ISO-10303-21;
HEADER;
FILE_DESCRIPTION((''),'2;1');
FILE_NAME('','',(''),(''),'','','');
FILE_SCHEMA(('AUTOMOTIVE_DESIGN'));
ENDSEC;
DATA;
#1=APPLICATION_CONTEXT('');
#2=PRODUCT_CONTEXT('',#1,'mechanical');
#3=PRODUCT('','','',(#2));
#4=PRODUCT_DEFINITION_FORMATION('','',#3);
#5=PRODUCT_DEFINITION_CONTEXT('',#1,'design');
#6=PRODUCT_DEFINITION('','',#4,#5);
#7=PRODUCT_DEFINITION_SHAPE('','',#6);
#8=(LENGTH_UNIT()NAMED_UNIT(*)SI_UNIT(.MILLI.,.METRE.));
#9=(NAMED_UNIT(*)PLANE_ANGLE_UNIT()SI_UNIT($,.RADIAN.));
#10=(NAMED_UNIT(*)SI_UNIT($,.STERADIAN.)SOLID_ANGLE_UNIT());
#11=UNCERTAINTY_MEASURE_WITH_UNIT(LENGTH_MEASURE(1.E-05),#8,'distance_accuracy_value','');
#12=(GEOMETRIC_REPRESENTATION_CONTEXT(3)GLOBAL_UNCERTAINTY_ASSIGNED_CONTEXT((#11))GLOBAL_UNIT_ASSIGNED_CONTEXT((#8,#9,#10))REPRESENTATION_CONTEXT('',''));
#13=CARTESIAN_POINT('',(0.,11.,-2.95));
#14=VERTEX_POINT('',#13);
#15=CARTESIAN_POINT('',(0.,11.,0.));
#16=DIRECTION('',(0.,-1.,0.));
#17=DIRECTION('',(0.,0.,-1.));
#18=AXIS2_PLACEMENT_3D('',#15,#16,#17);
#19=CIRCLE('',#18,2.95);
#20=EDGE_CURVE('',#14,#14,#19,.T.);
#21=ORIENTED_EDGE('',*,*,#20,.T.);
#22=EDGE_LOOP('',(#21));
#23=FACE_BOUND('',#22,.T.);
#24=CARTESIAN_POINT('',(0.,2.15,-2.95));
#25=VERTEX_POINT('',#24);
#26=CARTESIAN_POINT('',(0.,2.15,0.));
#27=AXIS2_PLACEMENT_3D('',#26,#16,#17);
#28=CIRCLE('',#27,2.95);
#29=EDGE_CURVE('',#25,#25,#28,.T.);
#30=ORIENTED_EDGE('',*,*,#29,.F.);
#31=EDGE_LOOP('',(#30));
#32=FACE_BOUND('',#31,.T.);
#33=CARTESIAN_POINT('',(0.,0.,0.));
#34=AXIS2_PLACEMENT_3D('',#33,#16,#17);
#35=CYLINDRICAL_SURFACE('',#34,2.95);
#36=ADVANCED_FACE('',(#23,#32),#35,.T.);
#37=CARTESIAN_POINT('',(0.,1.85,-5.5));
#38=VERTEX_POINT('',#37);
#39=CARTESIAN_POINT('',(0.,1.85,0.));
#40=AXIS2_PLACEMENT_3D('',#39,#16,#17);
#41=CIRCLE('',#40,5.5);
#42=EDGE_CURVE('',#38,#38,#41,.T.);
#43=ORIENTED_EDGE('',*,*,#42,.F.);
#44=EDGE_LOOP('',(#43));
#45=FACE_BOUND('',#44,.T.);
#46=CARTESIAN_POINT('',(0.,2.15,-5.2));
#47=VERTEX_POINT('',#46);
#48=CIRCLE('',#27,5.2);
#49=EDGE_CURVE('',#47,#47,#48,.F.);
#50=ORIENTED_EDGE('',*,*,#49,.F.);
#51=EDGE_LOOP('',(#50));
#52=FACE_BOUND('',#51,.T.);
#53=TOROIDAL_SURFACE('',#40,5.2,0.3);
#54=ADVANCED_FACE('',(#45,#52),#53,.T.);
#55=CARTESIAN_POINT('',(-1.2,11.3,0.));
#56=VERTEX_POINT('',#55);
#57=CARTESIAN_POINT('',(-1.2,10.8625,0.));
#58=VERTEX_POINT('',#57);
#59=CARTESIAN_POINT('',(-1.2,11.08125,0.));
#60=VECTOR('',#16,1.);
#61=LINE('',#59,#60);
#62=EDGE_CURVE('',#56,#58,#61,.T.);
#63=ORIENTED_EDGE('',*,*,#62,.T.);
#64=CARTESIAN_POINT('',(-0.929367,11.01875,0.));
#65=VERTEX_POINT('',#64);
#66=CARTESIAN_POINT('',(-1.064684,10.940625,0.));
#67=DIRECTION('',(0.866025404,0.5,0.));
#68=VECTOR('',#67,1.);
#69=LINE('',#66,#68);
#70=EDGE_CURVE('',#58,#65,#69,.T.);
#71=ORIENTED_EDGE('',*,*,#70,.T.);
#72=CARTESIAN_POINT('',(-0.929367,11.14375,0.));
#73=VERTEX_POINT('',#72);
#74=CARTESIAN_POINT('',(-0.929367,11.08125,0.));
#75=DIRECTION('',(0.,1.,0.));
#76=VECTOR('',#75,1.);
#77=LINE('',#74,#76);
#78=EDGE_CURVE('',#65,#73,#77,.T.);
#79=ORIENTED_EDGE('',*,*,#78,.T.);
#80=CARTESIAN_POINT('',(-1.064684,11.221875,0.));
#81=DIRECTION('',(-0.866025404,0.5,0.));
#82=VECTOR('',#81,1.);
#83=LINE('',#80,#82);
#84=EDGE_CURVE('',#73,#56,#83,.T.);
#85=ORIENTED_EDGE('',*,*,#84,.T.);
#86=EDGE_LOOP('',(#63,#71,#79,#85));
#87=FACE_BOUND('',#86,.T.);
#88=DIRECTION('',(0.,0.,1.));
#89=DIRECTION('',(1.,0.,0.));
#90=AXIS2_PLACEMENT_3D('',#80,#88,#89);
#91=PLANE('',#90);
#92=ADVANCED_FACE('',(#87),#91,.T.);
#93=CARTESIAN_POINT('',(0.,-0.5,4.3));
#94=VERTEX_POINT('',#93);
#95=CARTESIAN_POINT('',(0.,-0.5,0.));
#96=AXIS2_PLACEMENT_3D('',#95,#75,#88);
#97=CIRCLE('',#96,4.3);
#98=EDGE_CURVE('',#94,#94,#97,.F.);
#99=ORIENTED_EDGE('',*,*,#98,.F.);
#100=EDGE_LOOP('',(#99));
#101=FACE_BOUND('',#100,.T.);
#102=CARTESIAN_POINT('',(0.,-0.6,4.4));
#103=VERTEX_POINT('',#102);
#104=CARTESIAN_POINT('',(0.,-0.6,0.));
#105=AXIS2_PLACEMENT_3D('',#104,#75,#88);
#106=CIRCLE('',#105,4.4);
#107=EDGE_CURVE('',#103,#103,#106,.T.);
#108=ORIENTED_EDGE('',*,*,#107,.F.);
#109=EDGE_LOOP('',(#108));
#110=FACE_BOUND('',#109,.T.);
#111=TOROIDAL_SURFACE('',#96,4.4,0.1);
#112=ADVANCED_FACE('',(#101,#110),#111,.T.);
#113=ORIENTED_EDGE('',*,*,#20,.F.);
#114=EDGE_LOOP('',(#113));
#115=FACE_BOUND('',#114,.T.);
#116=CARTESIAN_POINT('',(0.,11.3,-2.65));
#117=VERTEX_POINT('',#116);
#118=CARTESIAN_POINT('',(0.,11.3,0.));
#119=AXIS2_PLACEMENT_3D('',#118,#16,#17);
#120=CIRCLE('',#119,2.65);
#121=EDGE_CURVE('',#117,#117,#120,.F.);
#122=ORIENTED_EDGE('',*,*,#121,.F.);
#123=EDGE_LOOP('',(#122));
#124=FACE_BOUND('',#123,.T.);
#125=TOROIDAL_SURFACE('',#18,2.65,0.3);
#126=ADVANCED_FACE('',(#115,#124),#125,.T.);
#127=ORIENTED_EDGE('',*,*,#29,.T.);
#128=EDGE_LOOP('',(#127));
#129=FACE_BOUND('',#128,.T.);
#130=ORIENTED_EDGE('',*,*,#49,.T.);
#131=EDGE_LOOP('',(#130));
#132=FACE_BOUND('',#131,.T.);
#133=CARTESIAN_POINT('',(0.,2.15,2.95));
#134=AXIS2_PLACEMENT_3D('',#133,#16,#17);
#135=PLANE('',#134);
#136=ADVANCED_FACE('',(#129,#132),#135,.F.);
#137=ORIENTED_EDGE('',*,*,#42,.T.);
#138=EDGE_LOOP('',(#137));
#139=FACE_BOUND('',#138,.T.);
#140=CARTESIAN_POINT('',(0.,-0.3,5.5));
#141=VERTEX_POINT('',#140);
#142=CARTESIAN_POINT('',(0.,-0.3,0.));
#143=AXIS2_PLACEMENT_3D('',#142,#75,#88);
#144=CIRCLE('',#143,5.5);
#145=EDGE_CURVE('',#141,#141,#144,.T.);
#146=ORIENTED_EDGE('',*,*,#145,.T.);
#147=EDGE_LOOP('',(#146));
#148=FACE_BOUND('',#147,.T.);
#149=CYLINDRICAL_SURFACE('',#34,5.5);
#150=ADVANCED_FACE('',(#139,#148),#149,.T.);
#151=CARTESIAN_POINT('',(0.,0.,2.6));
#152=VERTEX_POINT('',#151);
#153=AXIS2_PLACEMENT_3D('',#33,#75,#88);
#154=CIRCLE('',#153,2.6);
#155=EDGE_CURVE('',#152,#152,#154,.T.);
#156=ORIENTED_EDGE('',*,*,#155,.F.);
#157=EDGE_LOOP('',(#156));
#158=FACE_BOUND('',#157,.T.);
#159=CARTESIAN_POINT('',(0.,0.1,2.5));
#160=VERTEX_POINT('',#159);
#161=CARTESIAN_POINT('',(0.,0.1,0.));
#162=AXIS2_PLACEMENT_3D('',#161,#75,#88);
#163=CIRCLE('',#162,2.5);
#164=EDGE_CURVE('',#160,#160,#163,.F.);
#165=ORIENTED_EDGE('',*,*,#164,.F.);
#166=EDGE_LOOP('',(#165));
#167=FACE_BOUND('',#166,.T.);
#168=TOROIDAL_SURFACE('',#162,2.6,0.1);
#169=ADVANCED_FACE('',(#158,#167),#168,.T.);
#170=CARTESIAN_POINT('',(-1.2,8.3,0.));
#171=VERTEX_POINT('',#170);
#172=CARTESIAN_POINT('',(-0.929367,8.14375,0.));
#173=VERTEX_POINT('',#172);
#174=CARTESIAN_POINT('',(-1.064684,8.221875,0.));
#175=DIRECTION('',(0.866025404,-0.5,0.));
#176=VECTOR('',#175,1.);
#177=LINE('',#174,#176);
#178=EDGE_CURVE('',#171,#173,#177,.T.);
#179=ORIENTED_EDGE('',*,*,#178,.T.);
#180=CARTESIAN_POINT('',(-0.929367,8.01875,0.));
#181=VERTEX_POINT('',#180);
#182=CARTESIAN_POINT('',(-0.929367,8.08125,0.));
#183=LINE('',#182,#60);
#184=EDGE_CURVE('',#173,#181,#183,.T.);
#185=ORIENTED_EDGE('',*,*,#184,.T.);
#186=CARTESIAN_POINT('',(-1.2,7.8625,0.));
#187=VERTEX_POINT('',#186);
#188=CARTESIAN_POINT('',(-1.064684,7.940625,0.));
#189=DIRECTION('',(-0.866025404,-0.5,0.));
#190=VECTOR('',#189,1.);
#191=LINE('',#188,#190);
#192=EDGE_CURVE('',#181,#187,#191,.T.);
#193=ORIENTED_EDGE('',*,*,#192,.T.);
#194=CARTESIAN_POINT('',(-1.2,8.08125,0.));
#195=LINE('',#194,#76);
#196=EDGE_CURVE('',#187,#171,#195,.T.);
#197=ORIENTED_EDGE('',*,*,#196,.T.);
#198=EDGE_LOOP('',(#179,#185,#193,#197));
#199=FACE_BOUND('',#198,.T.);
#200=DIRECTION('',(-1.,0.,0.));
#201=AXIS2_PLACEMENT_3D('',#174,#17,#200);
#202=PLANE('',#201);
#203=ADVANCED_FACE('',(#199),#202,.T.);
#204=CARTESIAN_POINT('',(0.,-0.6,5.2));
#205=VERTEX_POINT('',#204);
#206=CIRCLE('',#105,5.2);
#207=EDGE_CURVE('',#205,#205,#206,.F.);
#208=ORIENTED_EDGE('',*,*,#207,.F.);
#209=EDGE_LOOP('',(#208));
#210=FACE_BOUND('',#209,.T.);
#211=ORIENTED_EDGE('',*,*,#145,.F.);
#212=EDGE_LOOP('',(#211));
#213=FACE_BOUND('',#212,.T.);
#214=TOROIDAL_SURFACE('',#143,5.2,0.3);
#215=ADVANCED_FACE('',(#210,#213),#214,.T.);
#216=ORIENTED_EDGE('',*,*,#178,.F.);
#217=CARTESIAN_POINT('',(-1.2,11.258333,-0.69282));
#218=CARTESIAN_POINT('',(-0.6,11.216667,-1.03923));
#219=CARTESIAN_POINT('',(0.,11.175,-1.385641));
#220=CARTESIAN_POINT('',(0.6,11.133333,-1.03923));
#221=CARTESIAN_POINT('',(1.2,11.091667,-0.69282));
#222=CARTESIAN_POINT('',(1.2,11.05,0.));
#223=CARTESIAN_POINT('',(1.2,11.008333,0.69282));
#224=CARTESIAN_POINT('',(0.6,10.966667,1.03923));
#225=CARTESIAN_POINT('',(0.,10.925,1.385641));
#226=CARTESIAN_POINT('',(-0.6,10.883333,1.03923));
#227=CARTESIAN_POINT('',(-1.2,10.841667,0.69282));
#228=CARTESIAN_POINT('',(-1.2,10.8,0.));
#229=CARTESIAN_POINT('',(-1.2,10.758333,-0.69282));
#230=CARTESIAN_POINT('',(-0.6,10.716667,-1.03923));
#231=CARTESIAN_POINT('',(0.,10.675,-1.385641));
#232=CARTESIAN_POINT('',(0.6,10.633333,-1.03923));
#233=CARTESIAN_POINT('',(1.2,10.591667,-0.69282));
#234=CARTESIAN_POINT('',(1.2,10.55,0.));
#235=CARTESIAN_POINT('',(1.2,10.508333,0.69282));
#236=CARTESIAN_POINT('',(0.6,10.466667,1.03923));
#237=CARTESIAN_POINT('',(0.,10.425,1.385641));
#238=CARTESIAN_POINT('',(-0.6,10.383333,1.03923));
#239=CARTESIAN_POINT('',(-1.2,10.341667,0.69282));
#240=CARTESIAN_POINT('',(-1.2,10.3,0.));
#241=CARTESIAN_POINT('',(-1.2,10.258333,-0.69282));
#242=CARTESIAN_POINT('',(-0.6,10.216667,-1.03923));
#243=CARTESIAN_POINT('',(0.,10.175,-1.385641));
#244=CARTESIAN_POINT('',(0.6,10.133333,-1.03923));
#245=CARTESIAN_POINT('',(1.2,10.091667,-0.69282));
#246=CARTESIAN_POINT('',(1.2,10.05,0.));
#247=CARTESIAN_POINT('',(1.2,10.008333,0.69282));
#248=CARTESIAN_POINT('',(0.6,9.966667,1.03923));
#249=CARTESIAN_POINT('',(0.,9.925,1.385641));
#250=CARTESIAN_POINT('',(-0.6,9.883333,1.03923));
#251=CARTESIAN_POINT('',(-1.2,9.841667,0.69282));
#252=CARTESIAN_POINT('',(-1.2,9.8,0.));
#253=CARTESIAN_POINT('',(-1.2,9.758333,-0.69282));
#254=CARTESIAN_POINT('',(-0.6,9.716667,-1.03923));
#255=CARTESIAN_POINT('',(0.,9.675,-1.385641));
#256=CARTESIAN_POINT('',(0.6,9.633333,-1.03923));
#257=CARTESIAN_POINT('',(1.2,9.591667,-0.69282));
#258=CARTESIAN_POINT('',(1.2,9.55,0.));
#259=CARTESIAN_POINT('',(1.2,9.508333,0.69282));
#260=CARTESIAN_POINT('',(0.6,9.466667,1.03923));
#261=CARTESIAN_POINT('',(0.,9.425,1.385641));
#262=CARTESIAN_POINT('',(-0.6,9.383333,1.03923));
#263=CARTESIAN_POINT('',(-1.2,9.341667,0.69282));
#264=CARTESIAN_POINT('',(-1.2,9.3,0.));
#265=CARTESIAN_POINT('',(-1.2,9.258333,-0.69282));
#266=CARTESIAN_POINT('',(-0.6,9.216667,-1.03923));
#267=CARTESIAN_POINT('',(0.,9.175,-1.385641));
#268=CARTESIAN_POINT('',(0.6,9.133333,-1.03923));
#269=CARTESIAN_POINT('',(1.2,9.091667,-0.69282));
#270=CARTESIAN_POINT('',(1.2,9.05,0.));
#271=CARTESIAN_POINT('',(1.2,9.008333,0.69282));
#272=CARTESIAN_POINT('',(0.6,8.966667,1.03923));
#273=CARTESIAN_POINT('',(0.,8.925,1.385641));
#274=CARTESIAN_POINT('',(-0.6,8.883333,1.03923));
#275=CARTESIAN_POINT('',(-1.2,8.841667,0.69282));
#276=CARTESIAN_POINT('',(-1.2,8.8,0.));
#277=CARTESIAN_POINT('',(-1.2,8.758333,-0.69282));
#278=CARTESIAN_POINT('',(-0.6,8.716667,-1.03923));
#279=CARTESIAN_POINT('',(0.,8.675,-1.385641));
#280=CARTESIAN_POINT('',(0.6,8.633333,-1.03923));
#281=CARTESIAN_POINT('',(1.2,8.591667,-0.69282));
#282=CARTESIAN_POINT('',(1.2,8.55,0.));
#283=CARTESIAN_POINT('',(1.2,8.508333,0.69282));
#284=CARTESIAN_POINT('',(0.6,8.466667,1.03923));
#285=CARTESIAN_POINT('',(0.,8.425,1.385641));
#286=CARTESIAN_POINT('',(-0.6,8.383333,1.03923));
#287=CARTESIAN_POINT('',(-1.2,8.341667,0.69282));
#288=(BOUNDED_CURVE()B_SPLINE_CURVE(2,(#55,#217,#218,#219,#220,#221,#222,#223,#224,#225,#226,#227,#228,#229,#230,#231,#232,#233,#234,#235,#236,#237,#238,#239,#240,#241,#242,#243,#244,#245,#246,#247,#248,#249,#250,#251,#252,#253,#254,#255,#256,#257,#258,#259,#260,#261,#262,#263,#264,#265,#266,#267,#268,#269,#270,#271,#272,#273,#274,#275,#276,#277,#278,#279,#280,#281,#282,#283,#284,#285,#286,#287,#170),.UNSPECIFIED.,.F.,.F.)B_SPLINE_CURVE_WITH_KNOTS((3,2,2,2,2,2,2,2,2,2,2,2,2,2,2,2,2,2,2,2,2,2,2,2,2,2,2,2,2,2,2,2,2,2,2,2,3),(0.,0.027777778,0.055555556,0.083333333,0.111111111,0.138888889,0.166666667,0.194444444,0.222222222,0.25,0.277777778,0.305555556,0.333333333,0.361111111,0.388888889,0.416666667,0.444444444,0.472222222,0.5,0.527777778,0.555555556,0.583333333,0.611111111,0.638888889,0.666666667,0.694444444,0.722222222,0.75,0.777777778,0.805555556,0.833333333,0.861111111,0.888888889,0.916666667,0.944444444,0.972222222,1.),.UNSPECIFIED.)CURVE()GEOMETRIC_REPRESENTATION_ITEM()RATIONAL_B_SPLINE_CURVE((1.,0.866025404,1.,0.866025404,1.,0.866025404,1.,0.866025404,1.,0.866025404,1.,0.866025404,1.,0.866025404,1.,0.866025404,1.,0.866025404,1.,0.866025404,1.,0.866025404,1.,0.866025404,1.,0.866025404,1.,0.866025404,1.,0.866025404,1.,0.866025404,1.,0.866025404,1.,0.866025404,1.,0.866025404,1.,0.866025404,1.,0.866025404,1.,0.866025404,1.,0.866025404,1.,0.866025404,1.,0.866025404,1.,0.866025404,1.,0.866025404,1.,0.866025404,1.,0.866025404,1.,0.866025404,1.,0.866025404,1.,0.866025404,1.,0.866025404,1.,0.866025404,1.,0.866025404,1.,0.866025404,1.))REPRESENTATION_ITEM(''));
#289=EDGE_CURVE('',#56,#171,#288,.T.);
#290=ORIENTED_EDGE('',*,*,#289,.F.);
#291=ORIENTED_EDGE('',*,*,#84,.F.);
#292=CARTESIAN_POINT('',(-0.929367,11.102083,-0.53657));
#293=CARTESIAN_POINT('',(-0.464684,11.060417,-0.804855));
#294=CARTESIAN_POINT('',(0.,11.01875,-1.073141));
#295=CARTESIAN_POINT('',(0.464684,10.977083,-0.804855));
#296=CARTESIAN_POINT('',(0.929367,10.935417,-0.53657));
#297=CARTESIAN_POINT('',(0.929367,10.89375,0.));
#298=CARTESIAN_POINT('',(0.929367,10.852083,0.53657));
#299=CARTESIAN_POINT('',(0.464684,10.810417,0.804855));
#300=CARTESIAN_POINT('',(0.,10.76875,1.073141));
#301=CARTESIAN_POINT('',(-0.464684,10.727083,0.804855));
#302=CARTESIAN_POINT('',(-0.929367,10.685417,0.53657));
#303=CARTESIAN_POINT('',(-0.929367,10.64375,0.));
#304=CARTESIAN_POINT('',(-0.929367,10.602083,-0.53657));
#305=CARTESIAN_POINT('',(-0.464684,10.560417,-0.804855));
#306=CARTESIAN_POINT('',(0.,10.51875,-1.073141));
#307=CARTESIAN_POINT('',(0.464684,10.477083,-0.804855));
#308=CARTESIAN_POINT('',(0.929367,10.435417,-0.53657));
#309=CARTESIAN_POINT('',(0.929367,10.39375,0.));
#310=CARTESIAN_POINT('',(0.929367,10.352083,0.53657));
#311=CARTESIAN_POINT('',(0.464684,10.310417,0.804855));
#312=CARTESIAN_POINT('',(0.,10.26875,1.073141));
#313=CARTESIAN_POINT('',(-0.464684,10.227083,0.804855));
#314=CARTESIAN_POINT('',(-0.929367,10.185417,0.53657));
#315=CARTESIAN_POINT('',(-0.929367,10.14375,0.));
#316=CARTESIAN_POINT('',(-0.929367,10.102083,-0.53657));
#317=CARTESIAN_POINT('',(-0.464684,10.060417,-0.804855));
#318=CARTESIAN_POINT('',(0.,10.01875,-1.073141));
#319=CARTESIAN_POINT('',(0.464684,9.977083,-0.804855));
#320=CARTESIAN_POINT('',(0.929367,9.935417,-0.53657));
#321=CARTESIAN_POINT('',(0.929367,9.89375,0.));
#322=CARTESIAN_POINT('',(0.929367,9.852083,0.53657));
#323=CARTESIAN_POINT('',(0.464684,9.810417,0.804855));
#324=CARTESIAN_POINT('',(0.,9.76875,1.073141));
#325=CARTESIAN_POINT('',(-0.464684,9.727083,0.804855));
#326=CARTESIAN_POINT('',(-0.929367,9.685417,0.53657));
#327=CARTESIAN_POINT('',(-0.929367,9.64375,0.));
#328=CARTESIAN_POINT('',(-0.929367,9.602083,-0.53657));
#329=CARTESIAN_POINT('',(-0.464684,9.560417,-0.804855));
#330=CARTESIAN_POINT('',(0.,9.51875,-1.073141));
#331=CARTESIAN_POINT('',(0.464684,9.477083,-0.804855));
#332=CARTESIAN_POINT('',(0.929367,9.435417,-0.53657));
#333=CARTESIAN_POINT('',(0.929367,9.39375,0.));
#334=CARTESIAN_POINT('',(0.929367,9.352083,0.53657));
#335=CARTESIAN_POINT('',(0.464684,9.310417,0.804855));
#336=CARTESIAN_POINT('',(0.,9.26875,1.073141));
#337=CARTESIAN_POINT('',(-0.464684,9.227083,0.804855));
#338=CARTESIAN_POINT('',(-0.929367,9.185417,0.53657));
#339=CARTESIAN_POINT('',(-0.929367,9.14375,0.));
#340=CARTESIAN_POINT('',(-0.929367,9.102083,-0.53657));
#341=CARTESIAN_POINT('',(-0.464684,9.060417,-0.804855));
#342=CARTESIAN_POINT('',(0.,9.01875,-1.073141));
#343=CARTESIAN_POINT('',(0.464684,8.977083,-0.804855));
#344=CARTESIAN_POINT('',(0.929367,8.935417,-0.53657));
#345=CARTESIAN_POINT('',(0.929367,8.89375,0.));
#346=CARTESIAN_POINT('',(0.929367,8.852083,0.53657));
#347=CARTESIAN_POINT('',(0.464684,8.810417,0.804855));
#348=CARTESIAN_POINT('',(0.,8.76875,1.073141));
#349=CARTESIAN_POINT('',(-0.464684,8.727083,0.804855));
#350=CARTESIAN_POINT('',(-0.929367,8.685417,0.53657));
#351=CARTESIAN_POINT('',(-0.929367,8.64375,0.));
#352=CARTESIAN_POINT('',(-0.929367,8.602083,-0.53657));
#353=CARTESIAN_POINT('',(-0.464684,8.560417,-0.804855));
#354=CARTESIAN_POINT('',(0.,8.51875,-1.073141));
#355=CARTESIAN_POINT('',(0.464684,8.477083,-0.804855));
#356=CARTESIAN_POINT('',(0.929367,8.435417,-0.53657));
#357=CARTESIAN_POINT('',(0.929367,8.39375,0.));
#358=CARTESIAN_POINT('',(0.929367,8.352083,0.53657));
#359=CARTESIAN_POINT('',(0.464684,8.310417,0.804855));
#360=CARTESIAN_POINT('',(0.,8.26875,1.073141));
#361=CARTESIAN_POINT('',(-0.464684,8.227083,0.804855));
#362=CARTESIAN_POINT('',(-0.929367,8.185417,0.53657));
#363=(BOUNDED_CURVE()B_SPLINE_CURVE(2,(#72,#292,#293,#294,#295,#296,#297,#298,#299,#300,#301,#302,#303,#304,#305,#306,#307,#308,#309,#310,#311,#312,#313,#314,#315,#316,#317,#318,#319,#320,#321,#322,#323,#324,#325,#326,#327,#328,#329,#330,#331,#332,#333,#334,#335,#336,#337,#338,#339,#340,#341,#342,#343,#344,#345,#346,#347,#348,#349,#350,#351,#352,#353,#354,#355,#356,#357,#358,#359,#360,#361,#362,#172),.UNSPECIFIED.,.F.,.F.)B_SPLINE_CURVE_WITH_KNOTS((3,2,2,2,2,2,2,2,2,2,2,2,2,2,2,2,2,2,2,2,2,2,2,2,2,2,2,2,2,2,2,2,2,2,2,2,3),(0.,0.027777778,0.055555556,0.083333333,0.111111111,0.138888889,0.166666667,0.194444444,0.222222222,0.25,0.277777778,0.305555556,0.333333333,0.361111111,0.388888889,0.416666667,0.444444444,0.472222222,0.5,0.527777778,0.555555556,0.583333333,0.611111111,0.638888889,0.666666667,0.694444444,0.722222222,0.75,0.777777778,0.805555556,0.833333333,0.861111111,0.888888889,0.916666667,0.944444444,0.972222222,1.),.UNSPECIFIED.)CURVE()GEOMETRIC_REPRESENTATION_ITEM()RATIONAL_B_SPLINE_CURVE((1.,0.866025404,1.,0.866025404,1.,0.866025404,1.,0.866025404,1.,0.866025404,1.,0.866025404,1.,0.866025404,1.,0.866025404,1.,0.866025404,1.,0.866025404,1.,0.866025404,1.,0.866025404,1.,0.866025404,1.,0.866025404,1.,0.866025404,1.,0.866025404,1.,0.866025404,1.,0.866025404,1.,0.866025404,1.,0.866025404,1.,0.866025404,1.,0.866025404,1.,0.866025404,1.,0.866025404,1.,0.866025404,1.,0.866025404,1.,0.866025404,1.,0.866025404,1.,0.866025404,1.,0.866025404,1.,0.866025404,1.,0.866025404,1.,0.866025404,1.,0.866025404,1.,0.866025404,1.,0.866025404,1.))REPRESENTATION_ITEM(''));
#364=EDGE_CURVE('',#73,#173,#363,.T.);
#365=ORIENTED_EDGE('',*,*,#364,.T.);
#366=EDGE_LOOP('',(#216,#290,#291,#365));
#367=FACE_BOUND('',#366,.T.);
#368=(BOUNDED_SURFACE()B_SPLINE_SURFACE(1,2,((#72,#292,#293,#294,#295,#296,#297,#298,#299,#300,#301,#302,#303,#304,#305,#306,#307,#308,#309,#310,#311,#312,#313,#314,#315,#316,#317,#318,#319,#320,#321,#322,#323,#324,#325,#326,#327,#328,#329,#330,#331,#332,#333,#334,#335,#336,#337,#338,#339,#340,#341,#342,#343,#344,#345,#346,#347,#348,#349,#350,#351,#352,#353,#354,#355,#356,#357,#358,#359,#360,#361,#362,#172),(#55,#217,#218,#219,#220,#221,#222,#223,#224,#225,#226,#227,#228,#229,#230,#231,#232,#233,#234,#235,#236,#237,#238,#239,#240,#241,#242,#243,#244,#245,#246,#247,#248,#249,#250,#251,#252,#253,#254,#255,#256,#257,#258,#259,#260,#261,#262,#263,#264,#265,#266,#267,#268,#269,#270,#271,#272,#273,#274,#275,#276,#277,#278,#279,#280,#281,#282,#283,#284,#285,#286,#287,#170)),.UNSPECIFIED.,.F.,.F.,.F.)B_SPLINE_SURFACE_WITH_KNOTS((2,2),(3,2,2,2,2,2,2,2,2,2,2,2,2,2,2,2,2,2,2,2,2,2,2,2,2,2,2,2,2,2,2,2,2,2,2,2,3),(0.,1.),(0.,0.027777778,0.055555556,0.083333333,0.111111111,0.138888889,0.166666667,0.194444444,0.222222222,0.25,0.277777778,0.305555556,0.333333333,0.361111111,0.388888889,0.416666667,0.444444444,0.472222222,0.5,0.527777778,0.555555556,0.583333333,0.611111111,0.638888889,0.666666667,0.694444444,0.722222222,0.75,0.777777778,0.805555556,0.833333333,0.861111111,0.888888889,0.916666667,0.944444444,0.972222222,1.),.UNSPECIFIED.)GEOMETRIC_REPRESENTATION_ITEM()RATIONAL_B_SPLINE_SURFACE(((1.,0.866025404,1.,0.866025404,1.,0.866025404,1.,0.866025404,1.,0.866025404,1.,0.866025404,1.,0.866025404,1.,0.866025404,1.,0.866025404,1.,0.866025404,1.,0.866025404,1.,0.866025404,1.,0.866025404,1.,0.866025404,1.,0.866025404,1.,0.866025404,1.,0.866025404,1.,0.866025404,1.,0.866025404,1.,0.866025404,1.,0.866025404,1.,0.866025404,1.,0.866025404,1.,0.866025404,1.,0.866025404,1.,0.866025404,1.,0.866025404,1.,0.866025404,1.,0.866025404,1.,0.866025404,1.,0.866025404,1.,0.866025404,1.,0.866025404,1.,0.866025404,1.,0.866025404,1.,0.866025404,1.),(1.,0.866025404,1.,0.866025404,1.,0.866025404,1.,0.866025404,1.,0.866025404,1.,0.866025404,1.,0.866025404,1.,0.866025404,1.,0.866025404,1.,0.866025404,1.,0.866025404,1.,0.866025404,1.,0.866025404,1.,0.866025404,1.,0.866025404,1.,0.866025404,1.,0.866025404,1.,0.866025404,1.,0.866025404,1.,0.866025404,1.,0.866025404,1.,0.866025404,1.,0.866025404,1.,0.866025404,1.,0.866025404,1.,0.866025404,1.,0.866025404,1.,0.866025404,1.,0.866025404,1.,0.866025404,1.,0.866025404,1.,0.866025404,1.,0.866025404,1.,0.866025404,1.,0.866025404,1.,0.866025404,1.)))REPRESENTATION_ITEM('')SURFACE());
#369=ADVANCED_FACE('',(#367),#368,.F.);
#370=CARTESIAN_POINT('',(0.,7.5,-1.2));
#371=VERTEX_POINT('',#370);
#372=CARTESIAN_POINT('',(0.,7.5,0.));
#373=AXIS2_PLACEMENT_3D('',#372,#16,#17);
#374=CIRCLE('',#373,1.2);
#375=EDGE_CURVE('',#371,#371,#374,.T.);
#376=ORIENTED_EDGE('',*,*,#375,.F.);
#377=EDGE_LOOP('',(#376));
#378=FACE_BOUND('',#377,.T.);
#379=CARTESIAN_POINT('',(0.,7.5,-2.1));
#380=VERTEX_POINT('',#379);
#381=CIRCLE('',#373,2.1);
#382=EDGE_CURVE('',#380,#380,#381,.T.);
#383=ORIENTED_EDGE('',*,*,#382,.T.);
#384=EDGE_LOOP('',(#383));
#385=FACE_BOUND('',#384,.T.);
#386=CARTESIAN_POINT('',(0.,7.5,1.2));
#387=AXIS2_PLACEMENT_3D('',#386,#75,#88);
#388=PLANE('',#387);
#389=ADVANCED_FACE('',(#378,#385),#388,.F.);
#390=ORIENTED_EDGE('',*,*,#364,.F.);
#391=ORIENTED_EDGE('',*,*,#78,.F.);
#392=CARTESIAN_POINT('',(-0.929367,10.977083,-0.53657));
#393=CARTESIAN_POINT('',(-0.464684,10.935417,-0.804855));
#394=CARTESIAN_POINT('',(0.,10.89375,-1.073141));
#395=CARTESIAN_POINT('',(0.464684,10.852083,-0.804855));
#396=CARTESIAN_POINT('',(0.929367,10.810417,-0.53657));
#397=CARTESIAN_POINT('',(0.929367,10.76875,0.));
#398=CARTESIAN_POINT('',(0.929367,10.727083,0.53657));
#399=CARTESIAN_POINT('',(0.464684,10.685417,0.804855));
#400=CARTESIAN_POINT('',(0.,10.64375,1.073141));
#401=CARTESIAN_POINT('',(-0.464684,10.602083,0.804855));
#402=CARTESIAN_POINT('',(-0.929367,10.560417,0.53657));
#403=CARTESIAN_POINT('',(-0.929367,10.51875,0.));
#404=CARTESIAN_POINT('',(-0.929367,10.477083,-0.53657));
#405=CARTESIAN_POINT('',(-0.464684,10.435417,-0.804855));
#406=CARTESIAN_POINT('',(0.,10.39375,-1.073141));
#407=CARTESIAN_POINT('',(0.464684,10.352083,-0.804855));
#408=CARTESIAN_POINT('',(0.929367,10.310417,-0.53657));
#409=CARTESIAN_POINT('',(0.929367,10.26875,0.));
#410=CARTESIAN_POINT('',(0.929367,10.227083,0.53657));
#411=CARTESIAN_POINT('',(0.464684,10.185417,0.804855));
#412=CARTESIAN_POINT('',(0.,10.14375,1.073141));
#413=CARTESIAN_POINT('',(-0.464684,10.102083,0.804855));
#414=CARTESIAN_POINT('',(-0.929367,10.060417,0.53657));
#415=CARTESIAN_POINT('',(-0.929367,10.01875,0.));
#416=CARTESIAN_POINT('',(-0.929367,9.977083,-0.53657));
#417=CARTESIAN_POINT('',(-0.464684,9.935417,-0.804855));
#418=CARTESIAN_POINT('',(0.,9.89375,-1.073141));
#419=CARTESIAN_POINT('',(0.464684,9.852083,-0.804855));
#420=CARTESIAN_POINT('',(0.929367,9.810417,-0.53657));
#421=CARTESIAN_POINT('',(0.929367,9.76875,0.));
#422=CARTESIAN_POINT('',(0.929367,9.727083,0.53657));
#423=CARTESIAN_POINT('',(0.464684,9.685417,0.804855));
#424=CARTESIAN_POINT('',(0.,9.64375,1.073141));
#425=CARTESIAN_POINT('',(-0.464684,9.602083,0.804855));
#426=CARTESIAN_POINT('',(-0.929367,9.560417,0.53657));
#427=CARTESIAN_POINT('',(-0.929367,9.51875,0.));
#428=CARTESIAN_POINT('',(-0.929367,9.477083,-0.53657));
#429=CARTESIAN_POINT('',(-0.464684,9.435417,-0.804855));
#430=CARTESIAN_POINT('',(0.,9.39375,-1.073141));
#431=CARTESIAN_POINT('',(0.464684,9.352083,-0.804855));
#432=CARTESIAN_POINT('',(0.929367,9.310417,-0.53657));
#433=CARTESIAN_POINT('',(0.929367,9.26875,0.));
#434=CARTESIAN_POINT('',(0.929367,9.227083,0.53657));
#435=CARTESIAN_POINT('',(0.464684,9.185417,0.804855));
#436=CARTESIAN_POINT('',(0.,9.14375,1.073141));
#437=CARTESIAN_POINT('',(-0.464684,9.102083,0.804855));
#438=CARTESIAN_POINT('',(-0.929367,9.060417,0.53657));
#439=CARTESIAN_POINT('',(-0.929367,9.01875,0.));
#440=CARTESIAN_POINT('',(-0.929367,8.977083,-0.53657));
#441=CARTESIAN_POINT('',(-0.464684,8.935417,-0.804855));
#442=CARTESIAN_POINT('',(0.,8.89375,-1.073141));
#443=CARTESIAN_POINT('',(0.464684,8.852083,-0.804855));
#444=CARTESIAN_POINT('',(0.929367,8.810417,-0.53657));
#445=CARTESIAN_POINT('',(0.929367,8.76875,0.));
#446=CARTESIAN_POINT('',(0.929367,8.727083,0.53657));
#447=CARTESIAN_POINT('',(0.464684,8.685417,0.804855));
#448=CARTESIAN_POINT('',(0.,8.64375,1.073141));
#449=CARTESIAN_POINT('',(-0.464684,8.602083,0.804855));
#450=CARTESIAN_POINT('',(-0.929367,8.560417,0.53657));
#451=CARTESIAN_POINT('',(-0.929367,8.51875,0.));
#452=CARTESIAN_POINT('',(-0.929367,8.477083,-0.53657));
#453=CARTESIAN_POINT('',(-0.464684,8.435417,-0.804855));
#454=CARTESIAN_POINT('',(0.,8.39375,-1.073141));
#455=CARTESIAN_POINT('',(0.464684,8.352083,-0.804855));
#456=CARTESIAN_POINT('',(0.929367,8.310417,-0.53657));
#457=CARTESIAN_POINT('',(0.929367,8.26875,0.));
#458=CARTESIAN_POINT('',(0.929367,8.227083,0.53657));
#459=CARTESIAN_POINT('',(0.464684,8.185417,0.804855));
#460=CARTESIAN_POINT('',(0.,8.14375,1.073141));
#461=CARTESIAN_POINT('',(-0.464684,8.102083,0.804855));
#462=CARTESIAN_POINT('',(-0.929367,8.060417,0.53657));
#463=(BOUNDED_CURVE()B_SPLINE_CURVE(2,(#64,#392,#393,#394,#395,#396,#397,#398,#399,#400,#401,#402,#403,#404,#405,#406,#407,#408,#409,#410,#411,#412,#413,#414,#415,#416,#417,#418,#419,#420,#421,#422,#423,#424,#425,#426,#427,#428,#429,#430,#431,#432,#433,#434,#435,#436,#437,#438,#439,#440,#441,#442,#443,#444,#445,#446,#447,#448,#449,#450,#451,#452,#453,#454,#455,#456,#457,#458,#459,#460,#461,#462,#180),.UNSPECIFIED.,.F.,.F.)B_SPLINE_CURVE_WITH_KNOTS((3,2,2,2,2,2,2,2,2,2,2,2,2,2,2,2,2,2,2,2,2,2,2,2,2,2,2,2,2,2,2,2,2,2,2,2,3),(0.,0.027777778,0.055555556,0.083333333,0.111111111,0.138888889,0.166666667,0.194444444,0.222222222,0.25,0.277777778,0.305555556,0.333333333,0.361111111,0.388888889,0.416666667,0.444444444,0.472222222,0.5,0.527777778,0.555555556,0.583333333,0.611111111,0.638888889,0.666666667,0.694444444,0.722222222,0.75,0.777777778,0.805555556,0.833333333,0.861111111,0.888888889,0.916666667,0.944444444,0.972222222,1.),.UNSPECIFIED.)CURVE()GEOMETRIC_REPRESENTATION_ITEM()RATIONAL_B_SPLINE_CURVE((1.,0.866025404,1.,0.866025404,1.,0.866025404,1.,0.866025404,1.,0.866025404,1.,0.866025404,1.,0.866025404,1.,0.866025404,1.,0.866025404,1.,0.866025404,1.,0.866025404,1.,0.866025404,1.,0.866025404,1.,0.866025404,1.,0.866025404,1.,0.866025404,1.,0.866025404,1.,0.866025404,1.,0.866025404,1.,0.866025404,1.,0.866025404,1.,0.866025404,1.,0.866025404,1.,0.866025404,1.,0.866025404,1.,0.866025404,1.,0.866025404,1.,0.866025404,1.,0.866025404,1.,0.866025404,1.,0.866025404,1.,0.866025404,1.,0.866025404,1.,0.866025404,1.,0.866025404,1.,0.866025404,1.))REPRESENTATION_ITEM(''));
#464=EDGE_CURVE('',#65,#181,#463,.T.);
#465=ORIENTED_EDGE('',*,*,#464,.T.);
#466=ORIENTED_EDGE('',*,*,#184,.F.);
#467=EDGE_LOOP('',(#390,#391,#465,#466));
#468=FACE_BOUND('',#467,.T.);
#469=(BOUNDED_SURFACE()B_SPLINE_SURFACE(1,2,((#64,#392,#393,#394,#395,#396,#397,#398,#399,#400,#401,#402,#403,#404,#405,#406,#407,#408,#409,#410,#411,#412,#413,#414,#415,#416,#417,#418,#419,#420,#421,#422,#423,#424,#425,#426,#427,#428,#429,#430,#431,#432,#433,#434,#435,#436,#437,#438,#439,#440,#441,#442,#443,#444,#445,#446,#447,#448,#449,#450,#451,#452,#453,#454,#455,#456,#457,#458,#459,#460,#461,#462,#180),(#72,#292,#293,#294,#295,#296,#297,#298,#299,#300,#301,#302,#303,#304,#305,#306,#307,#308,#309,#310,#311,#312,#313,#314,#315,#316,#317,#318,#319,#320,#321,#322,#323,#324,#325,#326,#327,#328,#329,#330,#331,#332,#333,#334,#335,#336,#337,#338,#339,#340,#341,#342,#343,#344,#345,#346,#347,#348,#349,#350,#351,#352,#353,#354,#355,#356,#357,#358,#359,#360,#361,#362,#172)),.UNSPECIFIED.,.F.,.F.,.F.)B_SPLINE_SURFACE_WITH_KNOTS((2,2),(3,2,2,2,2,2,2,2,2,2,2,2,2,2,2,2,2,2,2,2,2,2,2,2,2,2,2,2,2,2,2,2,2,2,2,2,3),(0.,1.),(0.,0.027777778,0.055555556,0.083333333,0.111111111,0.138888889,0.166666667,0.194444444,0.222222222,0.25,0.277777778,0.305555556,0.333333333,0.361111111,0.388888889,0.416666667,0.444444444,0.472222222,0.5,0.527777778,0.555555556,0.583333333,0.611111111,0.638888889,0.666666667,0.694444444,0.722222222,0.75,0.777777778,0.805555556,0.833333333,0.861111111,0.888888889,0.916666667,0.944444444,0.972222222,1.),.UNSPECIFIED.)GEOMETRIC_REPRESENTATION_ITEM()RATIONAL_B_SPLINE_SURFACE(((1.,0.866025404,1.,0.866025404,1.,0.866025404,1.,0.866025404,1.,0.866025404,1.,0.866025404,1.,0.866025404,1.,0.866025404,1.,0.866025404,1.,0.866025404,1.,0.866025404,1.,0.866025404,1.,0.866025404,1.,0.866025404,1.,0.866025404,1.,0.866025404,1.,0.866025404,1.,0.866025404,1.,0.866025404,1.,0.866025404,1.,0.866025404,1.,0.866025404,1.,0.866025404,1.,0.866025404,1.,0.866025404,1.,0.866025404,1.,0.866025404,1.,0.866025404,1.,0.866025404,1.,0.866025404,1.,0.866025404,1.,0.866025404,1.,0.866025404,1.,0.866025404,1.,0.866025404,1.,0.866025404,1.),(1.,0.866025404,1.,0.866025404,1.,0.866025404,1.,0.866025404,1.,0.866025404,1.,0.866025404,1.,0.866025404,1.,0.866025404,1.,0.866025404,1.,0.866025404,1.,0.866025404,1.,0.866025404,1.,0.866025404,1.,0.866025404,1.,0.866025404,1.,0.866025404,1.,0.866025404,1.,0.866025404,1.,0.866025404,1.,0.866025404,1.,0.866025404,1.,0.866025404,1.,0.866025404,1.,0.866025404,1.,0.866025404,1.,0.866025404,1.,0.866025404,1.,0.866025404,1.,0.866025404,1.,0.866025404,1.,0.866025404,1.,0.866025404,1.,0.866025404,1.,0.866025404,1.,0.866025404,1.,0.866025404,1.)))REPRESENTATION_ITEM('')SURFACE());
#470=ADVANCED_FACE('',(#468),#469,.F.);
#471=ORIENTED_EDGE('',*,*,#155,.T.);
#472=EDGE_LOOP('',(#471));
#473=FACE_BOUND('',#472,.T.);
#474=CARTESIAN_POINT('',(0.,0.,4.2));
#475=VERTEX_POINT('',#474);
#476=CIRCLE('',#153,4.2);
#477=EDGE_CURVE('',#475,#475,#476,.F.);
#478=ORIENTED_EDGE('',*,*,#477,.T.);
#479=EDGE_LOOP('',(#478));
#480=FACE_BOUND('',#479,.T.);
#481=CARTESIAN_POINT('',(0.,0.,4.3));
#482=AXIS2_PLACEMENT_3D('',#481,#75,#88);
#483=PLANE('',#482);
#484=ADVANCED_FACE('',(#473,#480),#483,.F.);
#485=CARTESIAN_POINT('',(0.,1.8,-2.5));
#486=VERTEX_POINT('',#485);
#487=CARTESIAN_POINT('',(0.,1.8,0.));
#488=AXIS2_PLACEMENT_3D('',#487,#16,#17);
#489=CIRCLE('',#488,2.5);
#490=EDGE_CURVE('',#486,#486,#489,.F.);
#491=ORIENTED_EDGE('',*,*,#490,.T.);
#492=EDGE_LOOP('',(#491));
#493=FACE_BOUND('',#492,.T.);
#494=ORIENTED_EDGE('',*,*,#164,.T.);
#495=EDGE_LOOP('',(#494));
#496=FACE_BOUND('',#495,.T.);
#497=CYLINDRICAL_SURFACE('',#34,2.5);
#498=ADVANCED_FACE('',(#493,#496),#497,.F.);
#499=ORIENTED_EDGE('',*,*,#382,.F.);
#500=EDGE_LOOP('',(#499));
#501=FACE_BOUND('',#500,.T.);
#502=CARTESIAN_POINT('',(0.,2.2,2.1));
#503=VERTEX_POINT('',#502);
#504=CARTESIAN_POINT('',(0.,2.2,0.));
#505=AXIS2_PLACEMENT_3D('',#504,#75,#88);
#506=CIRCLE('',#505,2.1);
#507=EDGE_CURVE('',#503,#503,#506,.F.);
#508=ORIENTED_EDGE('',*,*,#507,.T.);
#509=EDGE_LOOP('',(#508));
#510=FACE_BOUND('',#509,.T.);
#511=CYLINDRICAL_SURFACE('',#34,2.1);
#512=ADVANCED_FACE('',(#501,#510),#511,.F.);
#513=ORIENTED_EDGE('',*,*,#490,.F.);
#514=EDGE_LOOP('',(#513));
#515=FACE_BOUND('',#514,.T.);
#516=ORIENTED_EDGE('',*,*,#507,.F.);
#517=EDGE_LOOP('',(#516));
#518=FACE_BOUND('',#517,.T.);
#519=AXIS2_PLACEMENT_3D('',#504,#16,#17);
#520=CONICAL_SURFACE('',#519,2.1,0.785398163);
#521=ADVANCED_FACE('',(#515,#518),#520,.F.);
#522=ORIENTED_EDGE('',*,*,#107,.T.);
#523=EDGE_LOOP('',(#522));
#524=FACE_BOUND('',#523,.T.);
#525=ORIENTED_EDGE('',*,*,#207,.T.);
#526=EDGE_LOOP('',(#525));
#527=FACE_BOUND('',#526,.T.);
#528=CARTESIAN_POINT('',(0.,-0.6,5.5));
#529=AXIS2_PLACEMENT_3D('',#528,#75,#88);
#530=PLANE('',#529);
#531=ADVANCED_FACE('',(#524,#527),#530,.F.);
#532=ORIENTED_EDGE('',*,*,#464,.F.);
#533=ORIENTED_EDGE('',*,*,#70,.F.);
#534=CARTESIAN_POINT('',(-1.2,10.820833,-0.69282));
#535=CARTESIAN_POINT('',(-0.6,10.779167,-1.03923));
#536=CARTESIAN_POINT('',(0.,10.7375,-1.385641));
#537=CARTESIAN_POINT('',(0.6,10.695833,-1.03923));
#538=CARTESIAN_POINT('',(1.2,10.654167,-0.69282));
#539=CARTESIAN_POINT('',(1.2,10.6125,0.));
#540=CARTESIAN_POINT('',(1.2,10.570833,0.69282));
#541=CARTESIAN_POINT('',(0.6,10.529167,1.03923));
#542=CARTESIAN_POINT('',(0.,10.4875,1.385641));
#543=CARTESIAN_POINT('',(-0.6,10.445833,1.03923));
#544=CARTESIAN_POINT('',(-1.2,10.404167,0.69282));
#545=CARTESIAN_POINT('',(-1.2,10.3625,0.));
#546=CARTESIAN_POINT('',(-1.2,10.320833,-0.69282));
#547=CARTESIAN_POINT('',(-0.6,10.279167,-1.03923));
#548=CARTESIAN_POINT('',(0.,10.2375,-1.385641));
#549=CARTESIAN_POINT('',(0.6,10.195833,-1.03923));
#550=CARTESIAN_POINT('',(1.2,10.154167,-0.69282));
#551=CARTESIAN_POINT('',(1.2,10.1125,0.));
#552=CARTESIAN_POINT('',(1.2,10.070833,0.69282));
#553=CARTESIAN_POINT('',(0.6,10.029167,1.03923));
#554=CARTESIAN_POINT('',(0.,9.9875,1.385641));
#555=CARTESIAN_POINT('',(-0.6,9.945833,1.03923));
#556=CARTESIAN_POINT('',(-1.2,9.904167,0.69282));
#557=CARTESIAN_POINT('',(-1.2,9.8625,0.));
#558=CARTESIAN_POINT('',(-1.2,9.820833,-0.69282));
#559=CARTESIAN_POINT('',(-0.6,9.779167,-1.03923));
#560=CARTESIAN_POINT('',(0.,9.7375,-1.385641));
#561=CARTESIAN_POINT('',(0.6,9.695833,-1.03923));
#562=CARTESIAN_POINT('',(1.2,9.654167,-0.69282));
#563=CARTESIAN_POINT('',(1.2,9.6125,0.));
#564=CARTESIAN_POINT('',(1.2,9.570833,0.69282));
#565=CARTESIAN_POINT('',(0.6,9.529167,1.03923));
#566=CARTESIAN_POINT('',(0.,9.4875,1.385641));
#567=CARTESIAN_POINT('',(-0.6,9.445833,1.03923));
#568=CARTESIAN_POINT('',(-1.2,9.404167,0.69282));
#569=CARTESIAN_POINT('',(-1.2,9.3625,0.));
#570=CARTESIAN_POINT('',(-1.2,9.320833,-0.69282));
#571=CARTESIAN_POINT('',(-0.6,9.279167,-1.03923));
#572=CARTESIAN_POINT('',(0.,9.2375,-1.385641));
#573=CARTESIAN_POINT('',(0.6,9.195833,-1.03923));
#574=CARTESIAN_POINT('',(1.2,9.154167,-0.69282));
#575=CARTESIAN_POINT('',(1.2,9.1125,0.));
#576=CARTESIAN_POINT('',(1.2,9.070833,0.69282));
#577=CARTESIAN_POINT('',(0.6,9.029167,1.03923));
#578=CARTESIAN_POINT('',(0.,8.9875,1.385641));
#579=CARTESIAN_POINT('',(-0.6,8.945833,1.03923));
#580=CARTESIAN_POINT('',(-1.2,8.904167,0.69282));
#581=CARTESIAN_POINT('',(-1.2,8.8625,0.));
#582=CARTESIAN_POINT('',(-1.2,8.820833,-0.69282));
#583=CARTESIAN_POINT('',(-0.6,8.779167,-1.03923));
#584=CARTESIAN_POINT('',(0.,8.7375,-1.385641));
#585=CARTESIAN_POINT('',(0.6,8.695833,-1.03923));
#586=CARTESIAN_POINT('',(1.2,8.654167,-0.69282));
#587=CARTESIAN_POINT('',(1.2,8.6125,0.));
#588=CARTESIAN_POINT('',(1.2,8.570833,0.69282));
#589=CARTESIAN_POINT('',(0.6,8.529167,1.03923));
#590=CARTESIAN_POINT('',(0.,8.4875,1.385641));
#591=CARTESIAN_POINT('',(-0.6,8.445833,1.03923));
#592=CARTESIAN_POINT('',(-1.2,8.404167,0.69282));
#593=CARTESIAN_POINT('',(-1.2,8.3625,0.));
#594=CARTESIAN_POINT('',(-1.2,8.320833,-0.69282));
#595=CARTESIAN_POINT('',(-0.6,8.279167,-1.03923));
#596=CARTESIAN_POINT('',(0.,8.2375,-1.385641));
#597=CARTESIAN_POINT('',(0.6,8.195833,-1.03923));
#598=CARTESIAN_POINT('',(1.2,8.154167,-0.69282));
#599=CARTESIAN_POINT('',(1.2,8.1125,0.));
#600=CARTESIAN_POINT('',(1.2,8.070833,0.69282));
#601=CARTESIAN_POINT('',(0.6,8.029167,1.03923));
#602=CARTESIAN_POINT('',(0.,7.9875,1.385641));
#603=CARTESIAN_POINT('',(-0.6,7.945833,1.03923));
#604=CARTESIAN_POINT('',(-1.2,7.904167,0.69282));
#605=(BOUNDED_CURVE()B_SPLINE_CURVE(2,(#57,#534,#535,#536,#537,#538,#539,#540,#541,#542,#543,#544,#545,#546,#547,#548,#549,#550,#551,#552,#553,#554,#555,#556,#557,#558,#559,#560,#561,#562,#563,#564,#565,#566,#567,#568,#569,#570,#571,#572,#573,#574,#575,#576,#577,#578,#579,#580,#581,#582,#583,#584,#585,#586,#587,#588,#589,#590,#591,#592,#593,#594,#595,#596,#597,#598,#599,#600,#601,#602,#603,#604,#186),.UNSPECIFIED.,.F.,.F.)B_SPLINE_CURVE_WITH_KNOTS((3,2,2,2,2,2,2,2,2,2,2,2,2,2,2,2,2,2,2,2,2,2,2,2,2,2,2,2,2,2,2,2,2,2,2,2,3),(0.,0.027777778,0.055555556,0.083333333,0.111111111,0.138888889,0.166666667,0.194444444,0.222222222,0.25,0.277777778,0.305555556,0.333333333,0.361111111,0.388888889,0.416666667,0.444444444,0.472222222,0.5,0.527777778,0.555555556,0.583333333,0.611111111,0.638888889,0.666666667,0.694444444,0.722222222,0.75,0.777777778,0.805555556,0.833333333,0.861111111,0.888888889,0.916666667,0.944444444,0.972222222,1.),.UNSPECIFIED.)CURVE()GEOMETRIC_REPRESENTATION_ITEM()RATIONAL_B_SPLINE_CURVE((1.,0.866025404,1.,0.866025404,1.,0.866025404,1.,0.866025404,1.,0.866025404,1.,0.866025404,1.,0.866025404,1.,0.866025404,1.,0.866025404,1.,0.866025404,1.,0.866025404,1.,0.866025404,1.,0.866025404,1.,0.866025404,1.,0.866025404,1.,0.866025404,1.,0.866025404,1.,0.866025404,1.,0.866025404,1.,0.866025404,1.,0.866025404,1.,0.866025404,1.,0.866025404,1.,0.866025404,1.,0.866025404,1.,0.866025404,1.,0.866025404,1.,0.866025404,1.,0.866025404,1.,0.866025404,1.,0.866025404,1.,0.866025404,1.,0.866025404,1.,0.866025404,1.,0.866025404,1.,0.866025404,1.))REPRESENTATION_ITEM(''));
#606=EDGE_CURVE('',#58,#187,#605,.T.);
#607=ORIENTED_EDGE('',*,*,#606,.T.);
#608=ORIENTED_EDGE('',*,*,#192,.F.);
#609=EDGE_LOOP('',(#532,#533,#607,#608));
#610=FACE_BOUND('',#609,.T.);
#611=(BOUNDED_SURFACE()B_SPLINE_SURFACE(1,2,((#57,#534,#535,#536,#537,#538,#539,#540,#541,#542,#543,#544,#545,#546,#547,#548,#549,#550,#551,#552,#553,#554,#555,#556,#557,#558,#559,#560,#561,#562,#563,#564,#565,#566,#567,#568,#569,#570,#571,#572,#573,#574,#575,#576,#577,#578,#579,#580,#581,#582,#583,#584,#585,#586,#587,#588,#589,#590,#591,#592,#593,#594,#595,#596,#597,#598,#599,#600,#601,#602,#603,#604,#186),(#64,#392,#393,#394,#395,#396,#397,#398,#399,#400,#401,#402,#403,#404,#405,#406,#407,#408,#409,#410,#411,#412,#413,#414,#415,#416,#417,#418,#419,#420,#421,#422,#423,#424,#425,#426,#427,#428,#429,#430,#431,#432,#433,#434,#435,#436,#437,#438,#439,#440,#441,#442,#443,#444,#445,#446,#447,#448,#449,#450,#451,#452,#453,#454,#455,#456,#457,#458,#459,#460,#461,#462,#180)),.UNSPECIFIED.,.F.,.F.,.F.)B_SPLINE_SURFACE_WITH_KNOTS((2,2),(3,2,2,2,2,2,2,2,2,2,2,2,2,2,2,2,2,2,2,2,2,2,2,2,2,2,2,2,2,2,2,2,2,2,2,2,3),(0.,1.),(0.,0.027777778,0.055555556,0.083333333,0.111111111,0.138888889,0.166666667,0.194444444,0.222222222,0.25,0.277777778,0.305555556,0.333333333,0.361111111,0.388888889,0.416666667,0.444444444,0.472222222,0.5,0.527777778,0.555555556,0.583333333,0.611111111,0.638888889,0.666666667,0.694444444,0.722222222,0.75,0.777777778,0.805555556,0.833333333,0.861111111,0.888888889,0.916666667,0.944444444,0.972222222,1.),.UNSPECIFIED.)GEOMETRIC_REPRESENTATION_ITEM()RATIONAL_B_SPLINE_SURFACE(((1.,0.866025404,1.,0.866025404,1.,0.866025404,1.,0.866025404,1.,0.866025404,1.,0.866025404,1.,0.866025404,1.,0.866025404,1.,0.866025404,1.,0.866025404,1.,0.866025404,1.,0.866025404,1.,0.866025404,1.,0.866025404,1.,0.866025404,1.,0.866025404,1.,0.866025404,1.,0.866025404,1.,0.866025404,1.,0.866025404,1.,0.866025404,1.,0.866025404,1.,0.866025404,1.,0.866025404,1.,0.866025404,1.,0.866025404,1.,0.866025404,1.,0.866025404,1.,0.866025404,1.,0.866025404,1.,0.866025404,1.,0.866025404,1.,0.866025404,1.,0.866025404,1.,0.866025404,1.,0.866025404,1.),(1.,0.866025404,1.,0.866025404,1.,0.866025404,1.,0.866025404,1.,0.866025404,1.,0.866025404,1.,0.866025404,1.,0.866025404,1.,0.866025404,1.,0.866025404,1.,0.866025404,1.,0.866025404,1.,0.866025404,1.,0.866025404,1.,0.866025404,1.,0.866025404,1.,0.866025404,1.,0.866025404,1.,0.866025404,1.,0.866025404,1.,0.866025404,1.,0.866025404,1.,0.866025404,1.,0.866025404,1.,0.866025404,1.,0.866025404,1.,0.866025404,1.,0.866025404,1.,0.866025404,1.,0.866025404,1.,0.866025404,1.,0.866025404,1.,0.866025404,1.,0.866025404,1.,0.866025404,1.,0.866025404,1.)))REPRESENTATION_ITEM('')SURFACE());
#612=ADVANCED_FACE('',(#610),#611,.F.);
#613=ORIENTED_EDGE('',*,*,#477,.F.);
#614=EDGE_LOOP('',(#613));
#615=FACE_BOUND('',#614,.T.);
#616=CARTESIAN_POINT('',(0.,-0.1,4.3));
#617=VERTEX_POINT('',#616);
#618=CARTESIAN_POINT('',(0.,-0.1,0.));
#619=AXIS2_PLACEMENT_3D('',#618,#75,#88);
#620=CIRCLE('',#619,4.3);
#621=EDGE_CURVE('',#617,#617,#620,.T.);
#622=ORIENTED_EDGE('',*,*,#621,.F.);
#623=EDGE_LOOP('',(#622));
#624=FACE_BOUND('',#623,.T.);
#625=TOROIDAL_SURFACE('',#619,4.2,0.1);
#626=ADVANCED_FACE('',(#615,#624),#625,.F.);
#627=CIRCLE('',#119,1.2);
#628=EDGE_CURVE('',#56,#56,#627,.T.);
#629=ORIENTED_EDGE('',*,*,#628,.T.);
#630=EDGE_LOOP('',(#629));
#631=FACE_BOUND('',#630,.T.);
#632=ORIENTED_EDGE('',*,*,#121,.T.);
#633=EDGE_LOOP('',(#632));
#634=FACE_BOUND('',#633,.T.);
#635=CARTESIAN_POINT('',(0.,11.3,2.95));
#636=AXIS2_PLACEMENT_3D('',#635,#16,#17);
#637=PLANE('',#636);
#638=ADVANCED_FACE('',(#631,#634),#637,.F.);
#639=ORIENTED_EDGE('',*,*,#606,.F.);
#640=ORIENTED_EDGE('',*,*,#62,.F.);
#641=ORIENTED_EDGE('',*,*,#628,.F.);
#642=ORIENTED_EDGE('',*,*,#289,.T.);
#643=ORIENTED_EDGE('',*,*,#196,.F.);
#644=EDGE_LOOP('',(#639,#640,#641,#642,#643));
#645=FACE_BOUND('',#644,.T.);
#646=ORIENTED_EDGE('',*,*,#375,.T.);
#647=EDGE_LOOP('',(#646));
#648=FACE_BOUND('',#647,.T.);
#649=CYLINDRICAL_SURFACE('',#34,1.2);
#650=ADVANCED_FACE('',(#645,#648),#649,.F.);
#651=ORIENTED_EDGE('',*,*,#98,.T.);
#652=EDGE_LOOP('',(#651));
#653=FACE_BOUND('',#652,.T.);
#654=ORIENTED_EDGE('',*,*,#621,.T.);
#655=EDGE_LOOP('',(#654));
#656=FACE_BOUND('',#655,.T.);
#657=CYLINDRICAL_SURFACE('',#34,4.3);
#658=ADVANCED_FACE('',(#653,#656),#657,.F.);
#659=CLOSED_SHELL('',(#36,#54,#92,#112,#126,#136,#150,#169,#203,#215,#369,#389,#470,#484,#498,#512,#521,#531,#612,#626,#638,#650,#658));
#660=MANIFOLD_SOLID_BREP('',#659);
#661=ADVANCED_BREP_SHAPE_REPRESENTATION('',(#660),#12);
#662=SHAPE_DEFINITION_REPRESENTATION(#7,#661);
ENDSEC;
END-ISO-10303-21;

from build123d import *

# Parameters (mm, degrees)
FILLET1_R     = 0.3
CHAMFER1_SIZE = 1
FILLET2_R     = 0.1
THREAD1_PITCH = 0.5


with BuildPart() as part:
    # Sketch1 → Revolve1 (revolve)
    with BuildSketch(Plane(origin=(0, 0, 0), x_dir=(0, 0, -1), z_dir=(1, 0, 0)), mode=Mode.PRIVATE) as revolve1_sk:
        Polygon((-2.95, 11.3), (-2.95, 2.15), (-5.5, 2.15), (-5.5, -0.6), (-4.3, -0.6), (-4.3, 0), (-2.5, 0), (-2.5, 1.2), (-2.1, 1.2), (-2.1, 7.5), (-1.2, 7.5), (-1.2, 11.3), align=None)
    revolve(revolve1_sk.sketch.rotate(Axis((0, 0, 0), (0, 1, 0)), 180), axis=Axis((0, 0, 0), (0, 1, 0)))

    # Fillet1
    fillet1_edges = [part.edges().sort_by_distance(p)[0] for p in [
        (0, 11.3, 2.95),
        (0, 2.15, 5.5),
        (0, -0.6, 5.5),
    ]]
    fillet(fillet1_edges, radius=FILLET1_R)

    # Chamfer1
    # the kernel refuses this chamfer: 1 mm, written as the material it takes off along each edge
    with BuildSketch(Plane(origin=(0, 1.2, 0), x_dir=(0, 0, -1), z_dir=(1, 0, 0))) as chamfer1_piece_1_section:
        Polygon((2.1, CHAMFER1_SIZE), (2.1 + CHAMFER1_SIZE, 0), (2.1, 0), align=None)
    chamfer1_piece_1 = revolve(axis=Axis((0, 1.2, 0), (0, 1, 0)), mode=Mode.PRIVATE)
    chamfer1_piece_1 = chamfer1_piece_1 & Plane(origin=(0, 2.002033499, 0), x_dir=(0, 0, -1), z_dir=(0, 1, 0)) * Cylinder(2.5, 13, mode=Mode.PRIVATE)
    add(chamfer1_piece_1, mode=Mode.SUBTRACT)

    # Fillet2
    fillet2_edges = [part.edges().sort_by_distance(p)[0] for p in [
        (0, -0.6, 4.3),
        (0, 0, 4.3),
        (0, 0, 2.5),
    ]]
    fillet(fillet2_edges, radius=FILLET2_R)

    # Thread1: the profile of Thread Profile2 profile screwed along a right-hand helix of 6 turns, 6 arcs to a turn; built about Z, then put on its axis
    thread1_z = Axis((0, 0, 0), (0, 0, 1))
    thread1_corners = [(1.2003, 0, -0.000173205), (1.2003, 0, 0.437673204), (0.929367062, 0, 0.281249999), (0.929367062, 0, 0.156249999)]
    with BuildLine(mode=Mode.PRIVATE) as thread1_profile:
        Line(thread1_corners[0], thread1_corners[1])
        Line(thread1_corners[1], thread1_corners[2])
        Line(thread1_corners[2], thread1_corners[3])
        Line(thread1_corners[3], thread1_corners[0])
    thread1_cap = Face(thread1_profile.wire())
    thread1_turn_angles = [0, 30, 60, 90, 120, 150, 180, 210, 240, 270, 300, 330, 360]
    thread1_turn_weights = [1, 0.8660254037844387, 1, 0.8660254037844387, 1, 0.8660254037844387, 1, 0.8660254037844387, 1, 0.8660254037844387, 1, 0.8660254037844387, 1]
    thread1_turn_rails = [Edge.make_bspline([Vector(p[0], p[1], 0).rotate(thread1_z, thread1_turn_angles[k]) / thread1_turn_weights[k] + Vector(0, 0, p[2] + THREAD1_PITCH * thread1_turn_angles[k] / 360) for k in range(13)], [0, 0, 0, 1, 1, 2, 2, 3, 3, 4, 4, 5, 5, 6, 6, 6], 2, thread1_turn_weights) for p in thread1_corners]
    thread1_turn_sides = [Face.make_surface_from_curves(thread1_turn_rails[p[0]], thread1_turn_rails[p[1]]) for p in [(0, 1), (1, 2), (2, 3), (3, 0)]]
    thread1 = Plane(origin=(0, 11.3, 0), x_dir=(-1, 0, 0), z_dir=(0, -1, 0)) * Solid(Shell([*[p.moved(Location((0, 0, THREAD1_PITCH * i))) for i in range(6) for p in thread1_turn_sides], thread1_cap, thread1_cap.rotate(thread1_z, 2160).moved(Location((0, 0, THREAD1_PITCH * 2160 / 360)))]))
    add(thread1)


solid = part.part
